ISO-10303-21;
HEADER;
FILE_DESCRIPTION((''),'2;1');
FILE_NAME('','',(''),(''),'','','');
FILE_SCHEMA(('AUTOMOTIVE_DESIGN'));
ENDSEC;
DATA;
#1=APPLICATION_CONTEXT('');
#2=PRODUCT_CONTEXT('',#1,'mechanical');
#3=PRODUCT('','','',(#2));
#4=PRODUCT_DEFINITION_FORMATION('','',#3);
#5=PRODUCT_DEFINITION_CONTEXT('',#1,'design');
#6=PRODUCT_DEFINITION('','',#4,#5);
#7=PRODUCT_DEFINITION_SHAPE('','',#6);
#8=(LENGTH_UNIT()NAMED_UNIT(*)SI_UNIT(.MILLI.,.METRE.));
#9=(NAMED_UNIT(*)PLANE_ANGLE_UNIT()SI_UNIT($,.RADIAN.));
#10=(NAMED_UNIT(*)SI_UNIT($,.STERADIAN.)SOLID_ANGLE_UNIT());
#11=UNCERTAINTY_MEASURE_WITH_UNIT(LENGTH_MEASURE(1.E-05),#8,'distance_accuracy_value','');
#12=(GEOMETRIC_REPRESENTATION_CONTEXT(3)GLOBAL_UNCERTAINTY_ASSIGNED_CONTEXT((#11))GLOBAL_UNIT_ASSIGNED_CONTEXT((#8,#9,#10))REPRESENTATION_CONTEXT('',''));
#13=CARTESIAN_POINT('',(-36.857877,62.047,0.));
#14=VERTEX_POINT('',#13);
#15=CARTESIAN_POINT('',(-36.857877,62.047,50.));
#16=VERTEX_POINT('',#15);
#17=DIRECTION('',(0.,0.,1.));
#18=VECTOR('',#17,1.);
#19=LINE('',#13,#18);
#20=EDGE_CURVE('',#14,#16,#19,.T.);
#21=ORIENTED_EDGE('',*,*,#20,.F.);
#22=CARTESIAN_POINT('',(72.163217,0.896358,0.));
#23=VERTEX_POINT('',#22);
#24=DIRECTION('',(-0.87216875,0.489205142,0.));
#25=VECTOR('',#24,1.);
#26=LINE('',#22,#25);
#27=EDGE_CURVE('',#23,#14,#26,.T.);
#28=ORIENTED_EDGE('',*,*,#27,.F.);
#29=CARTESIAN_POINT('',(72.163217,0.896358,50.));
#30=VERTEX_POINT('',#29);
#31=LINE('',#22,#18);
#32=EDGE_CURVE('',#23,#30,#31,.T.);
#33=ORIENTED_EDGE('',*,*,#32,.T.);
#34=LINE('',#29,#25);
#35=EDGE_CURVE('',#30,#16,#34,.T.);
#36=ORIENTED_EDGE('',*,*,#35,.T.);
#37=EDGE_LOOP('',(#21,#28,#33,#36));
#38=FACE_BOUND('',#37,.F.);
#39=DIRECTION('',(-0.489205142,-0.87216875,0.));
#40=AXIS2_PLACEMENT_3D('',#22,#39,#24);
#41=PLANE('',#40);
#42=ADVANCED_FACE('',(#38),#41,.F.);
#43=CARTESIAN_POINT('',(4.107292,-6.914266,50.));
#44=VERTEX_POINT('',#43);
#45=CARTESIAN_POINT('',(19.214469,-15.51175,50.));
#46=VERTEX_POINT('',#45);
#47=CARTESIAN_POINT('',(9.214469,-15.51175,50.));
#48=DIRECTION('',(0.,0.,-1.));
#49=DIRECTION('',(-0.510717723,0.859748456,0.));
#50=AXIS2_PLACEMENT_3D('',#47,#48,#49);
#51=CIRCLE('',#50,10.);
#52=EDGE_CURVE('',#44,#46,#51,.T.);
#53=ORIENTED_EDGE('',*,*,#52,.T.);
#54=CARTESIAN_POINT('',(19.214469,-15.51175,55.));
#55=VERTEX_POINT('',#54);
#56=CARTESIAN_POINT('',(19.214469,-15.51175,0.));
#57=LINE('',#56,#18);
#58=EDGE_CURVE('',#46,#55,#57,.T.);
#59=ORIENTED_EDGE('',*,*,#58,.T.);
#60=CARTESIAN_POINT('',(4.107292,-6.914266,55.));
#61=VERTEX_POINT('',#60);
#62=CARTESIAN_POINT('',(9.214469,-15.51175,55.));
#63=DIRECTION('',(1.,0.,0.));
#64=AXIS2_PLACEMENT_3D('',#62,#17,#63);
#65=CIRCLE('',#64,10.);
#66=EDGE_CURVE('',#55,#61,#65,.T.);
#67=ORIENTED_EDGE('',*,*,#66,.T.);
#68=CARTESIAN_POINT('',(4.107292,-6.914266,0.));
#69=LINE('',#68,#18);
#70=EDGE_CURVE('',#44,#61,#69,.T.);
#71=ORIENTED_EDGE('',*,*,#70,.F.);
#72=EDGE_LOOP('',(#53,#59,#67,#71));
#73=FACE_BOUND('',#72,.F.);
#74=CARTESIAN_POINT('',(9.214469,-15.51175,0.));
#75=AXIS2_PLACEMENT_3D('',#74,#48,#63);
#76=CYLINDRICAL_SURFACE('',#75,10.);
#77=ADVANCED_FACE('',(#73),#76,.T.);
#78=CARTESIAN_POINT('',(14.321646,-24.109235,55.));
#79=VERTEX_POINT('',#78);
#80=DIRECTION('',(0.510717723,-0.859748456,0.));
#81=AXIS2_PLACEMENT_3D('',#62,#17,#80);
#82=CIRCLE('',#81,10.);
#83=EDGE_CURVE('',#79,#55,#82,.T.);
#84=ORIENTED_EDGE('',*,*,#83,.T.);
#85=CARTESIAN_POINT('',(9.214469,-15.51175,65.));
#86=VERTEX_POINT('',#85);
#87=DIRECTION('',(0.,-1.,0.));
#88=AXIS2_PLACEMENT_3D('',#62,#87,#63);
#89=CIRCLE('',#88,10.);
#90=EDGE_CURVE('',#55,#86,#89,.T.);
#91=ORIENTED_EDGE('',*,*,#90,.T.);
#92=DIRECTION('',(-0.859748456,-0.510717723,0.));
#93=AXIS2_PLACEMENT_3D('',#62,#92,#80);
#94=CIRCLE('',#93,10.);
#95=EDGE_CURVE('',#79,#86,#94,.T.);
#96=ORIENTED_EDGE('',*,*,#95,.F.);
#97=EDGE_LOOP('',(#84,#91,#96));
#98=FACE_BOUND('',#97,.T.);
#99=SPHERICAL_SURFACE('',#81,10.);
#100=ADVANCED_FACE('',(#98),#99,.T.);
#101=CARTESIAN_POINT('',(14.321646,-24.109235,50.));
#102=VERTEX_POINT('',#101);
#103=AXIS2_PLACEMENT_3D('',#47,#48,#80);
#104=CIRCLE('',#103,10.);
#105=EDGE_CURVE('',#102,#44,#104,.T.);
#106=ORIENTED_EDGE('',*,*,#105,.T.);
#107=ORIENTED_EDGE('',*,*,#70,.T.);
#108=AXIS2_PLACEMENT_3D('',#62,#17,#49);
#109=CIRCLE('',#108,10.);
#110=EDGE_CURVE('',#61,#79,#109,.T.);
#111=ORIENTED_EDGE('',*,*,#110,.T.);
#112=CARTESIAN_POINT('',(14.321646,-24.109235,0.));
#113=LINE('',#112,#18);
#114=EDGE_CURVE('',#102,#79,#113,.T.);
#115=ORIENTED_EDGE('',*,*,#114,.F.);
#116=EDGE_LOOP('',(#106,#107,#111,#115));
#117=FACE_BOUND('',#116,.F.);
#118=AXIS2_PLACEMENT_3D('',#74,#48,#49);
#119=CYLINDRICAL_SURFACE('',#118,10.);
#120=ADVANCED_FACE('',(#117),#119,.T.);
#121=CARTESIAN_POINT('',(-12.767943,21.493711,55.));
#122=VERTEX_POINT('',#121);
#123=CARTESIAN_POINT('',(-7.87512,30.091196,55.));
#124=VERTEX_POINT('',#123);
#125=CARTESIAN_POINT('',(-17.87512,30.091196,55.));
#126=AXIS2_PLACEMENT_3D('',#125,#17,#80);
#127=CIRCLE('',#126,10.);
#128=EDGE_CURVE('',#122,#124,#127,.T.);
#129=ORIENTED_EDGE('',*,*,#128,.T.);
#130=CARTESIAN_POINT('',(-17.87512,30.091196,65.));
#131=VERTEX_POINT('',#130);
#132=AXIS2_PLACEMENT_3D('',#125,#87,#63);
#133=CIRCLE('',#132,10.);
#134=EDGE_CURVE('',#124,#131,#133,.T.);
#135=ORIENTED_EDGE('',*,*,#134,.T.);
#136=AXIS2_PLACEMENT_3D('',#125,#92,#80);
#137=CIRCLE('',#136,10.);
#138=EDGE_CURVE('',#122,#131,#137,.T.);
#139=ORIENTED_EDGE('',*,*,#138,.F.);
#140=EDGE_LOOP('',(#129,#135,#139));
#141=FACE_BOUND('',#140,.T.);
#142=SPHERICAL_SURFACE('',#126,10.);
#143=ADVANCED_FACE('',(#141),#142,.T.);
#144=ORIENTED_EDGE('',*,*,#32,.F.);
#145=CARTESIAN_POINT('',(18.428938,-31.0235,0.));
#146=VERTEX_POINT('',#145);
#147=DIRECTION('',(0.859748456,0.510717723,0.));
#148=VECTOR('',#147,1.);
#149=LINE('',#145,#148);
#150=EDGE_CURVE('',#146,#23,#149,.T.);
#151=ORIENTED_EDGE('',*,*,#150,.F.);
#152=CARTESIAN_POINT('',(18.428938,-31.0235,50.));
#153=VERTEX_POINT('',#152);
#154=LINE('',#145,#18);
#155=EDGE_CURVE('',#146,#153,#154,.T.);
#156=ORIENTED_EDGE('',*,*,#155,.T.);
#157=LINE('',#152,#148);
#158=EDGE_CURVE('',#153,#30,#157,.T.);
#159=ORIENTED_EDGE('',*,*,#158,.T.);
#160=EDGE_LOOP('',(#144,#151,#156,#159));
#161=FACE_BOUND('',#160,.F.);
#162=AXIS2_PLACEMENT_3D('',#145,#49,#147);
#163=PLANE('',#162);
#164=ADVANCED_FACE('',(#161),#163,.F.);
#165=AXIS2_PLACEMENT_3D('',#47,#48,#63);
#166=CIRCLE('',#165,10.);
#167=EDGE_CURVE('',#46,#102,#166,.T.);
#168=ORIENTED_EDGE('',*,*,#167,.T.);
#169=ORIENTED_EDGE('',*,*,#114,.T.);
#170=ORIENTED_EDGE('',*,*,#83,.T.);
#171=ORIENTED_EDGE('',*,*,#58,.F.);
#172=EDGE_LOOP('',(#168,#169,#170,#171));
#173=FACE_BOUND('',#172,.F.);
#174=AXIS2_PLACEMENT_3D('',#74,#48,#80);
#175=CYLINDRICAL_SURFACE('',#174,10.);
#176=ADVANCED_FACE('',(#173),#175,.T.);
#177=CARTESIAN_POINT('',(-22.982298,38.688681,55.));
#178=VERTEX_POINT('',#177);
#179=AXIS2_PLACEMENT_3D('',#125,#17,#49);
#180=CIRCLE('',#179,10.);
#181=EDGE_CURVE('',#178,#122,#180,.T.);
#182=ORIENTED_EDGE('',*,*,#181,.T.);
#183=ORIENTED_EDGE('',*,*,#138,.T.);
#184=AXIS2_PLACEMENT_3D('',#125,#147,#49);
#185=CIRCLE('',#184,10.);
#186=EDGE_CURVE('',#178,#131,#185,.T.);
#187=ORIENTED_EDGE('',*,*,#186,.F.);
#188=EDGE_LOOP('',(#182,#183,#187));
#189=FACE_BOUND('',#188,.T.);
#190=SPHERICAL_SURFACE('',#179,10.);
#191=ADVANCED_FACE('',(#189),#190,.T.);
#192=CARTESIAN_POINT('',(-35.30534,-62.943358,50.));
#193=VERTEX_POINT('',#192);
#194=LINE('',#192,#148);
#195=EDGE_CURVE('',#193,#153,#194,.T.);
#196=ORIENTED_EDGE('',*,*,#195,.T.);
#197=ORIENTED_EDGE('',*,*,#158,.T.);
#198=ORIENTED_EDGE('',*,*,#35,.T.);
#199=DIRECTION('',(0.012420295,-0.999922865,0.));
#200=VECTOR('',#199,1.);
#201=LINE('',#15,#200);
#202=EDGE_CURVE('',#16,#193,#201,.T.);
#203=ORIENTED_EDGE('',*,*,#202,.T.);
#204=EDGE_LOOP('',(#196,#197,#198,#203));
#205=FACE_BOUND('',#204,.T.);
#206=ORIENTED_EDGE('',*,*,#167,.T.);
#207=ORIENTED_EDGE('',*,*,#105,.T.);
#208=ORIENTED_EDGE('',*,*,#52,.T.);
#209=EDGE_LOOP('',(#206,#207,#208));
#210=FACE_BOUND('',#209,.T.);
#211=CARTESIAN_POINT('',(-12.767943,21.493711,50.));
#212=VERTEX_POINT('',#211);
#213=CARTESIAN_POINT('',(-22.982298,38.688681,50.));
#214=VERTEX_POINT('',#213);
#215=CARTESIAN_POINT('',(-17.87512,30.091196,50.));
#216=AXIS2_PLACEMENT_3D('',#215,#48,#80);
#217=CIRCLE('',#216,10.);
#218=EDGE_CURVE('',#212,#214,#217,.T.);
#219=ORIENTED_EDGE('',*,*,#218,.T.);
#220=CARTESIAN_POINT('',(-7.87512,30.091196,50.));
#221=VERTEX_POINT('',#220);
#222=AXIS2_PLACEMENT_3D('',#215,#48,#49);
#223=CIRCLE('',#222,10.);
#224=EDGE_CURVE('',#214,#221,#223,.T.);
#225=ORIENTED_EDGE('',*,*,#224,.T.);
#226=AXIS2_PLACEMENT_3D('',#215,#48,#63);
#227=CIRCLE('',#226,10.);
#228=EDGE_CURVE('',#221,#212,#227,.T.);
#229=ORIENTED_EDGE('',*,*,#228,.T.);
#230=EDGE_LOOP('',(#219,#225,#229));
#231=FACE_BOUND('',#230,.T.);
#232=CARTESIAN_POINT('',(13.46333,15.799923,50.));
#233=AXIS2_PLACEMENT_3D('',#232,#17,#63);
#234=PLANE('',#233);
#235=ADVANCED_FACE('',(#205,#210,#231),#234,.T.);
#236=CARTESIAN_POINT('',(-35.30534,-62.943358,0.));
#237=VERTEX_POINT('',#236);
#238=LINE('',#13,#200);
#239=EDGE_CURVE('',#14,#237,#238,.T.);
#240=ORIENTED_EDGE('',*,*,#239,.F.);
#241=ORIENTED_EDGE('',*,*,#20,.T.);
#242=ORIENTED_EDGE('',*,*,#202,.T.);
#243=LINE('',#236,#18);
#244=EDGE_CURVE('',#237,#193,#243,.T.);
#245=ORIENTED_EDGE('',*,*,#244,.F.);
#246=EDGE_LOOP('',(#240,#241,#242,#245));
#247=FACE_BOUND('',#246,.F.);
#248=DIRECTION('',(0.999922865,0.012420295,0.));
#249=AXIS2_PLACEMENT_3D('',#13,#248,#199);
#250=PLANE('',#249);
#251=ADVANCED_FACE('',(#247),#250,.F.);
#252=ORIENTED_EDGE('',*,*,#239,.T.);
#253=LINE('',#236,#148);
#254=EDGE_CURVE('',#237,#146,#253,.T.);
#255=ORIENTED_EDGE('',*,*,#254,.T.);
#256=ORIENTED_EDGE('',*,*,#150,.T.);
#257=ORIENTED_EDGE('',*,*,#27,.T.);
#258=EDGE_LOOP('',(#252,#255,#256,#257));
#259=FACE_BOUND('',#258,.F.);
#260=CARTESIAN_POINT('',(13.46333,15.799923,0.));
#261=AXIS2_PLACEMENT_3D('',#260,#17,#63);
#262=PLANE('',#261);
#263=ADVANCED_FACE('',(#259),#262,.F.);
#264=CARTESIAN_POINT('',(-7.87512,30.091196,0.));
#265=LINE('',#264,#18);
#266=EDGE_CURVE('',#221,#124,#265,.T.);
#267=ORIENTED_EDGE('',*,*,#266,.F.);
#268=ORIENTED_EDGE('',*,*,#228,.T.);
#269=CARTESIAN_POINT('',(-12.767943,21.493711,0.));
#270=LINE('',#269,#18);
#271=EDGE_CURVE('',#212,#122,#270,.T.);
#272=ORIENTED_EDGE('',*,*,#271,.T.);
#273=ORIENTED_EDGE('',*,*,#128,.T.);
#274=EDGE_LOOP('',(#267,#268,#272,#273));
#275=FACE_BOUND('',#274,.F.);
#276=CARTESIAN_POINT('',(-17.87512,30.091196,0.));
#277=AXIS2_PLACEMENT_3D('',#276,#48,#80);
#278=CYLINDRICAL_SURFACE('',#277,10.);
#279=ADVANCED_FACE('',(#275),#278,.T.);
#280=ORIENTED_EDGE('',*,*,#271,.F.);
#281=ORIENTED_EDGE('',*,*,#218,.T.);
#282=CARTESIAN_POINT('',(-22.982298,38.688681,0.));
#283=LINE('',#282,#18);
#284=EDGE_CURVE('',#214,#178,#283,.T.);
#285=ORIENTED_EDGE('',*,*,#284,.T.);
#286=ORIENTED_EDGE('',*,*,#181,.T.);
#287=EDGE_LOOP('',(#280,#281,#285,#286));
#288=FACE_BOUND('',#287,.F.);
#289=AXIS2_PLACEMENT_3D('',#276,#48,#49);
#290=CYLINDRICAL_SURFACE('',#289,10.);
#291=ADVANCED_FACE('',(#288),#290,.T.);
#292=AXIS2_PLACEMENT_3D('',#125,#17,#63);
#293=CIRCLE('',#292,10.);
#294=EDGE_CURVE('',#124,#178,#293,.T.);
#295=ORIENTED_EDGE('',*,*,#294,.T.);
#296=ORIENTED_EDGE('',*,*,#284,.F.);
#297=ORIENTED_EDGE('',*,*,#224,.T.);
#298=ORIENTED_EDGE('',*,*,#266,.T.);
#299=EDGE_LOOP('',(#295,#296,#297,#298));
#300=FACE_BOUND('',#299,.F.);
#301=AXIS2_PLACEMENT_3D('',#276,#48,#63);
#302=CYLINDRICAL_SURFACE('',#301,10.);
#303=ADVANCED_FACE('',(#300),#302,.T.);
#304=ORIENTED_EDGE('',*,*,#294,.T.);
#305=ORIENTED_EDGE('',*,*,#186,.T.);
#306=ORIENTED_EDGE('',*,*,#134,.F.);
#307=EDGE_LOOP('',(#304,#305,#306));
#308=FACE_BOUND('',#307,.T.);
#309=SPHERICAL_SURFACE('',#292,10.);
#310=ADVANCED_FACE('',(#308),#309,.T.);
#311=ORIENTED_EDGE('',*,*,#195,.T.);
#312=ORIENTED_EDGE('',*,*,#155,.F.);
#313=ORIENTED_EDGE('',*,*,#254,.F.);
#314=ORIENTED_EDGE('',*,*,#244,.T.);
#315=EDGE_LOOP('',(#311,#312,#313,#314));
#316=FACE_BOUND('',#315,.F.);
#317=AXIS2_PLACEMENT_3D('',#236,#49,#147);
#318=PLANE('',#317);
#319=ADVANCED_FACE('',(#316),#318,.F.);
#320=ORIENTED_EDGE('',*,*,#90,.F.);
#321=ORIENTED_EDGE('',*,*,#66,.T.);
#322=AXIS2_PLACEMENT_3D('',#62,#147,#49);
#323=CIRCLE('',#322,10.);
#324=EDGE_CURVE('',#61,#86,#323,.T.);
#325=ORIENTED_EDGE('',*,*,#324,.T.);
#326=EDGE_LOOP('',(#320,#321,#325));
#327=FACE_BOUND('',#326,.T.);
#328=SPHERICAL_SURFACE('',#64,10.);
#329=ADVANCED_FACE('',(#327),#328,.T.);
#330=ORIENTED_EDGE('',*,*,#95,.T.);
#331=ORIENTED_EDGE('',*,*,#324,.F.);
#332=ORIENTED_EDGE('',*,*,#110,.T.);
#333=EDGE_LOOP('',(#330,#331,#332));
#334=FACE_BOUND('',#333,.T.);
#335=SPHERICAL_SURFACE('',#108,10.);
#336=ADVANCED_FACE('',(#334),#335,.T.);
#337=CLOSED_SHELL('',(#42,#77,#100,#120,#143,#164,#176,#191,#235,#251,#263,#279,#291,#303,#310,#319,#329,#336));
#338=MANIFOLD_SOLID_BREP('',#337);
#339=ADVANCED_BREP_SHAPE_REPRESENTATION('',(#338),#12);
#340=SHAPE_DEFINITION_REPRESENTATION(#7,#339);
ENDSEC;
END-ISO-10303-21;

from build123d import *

# Parameters (mm, degrees)
F1_DEPTH = 50
F2_DEPTH = 65
F3_R     = 10


with BuildPart() as f1:
    # F0 (on Top) → F1 (new body)
    with BuildSketch(Plane.XY):
        with BuildLine():
            Line((18.428938438, -31.0235001472), (72.1632169215, 0.8963575571))
            Line((72.1632169215, 0.8963575571), (-36.8578768761, 62.0470002943))
            Line((-36.8578768761, 62.0470002943), (-22.982297547, 38.6886805081))
            ThreePointArc((-22.982297547, 38.6886805081), (-12.9289992244, 38.7823343206), (-7.8751203144, 30.0911959508))
            ThreePointArc((-7.8751203144, 30.0911959508), (-9.1839819445, 25.1450748608), (-12.7679430817, 21.4937113934))
            Line((-12.7679430817, 21.4937113934), (0, 0))
            Line((0, 0), (4.1072919863, -6.9142655162))
            ThreePointArc((4.1072919863, -6.9142655162), (14.160590309, -6.8206117038), (19.214469219, -15.5117500736))
            ThreePointArc((19.214469219, -15.5117500736), (17.9056075888, -20.4578711635), (14.3216464517, -24.1092346309))
            Line((14.3216464517, -24.1092346309), (18.428938438, -31.0235001472))
        make_face()
        with BuildLine():
            Line((-35.3053400455, -62.9433578514), (18.428938438, -31.0235001472))
            Line((18.428938438, -31.0235001472), (14.3216464517, -24.1092346309))
            ThreePointArc((14.3216464517, -24.1092346309), (0.6169846617, -20.6189273063), (4.1072919863, -6.9142655162))
            Line((4.1072919863, -6.9142655162), (0, 0))
            Line((0, 0), (-12.7679430817, 21.4937113934))
            ThreePointArc((-12.7679430817, 21.4937113934), (-26.4726048717, 24.9840187181), (-22.982297547, 38.6886805081))
            Line((-22.982297547, 38.6886805081), (-36.8578768761, 62.0470002943))
            Line((-36.8578768761, 62.0470002943), (-35.3053400455, -62.9433578514))
        make_face()
    extrude(amount=F1_DEPTH)

    # F0 (on Top) → F2 (join)
    with BuildSketch(Plane.XY):
        with BuildLine():
            ThreePointArc((-7.8751203144, 30.0911959508), (-12.9289992244, 38.7823343206), (-22.982297547, 38.6886805081))
            Line((-22.982297547, 38.6886805081), (-12.7679430817, 21.4937113934))
            ThreePointArc((-12.7679430817, 21.4937113934), (-9.1839819445, 25.1450748608), (-7.8751203144, 30.0911959508))
        make_face()
        with BuildLine():
            Line((-12.7679430817, 21.4937113934), (-22.982297547, 38.6886805081))
            ThreePointArc((-22.982297547, 38.6886805081), (-26.4726048717, 24.9840187181), (-12.7679430817, 21.4937113934))
        make_face()
        with BuildLine():
            ThreePointArc((4.1072919863, -6.9142655162), (0.6169846617, -20.6189273063), (14.3216464517, -24.1092346309))
            Line((14.3216464517, -24.1092346309), (4.1072919863, -6.9142655162))
        make_face()
        with BuildLine():
            Line((4.1072919863, -6.9142655162), (14.3216464517, -24.1092346309))
            ThreePointArc((14.3216464517, -24.1092346309), (17.9056075888, -20.4578711635), (19.214469219, -15.5117500736))
            ThreePointArc((19.214469219, -15.5117500736), (14.160590309, -6.8206117038), (4.1072919863, -6.9142655162))
        make_face()
    extrude(amount=F2_DEPTH)

    # F3
    f3_edges = [f1.edges().sort_by_distance(p)[0] for p in [
        (-27.87512, 30.091196, 65),
        (4.107292, -6.914266, 65),
    ]]
    fillet(f3_edges, radius=F3_R)


solid = f1.part
